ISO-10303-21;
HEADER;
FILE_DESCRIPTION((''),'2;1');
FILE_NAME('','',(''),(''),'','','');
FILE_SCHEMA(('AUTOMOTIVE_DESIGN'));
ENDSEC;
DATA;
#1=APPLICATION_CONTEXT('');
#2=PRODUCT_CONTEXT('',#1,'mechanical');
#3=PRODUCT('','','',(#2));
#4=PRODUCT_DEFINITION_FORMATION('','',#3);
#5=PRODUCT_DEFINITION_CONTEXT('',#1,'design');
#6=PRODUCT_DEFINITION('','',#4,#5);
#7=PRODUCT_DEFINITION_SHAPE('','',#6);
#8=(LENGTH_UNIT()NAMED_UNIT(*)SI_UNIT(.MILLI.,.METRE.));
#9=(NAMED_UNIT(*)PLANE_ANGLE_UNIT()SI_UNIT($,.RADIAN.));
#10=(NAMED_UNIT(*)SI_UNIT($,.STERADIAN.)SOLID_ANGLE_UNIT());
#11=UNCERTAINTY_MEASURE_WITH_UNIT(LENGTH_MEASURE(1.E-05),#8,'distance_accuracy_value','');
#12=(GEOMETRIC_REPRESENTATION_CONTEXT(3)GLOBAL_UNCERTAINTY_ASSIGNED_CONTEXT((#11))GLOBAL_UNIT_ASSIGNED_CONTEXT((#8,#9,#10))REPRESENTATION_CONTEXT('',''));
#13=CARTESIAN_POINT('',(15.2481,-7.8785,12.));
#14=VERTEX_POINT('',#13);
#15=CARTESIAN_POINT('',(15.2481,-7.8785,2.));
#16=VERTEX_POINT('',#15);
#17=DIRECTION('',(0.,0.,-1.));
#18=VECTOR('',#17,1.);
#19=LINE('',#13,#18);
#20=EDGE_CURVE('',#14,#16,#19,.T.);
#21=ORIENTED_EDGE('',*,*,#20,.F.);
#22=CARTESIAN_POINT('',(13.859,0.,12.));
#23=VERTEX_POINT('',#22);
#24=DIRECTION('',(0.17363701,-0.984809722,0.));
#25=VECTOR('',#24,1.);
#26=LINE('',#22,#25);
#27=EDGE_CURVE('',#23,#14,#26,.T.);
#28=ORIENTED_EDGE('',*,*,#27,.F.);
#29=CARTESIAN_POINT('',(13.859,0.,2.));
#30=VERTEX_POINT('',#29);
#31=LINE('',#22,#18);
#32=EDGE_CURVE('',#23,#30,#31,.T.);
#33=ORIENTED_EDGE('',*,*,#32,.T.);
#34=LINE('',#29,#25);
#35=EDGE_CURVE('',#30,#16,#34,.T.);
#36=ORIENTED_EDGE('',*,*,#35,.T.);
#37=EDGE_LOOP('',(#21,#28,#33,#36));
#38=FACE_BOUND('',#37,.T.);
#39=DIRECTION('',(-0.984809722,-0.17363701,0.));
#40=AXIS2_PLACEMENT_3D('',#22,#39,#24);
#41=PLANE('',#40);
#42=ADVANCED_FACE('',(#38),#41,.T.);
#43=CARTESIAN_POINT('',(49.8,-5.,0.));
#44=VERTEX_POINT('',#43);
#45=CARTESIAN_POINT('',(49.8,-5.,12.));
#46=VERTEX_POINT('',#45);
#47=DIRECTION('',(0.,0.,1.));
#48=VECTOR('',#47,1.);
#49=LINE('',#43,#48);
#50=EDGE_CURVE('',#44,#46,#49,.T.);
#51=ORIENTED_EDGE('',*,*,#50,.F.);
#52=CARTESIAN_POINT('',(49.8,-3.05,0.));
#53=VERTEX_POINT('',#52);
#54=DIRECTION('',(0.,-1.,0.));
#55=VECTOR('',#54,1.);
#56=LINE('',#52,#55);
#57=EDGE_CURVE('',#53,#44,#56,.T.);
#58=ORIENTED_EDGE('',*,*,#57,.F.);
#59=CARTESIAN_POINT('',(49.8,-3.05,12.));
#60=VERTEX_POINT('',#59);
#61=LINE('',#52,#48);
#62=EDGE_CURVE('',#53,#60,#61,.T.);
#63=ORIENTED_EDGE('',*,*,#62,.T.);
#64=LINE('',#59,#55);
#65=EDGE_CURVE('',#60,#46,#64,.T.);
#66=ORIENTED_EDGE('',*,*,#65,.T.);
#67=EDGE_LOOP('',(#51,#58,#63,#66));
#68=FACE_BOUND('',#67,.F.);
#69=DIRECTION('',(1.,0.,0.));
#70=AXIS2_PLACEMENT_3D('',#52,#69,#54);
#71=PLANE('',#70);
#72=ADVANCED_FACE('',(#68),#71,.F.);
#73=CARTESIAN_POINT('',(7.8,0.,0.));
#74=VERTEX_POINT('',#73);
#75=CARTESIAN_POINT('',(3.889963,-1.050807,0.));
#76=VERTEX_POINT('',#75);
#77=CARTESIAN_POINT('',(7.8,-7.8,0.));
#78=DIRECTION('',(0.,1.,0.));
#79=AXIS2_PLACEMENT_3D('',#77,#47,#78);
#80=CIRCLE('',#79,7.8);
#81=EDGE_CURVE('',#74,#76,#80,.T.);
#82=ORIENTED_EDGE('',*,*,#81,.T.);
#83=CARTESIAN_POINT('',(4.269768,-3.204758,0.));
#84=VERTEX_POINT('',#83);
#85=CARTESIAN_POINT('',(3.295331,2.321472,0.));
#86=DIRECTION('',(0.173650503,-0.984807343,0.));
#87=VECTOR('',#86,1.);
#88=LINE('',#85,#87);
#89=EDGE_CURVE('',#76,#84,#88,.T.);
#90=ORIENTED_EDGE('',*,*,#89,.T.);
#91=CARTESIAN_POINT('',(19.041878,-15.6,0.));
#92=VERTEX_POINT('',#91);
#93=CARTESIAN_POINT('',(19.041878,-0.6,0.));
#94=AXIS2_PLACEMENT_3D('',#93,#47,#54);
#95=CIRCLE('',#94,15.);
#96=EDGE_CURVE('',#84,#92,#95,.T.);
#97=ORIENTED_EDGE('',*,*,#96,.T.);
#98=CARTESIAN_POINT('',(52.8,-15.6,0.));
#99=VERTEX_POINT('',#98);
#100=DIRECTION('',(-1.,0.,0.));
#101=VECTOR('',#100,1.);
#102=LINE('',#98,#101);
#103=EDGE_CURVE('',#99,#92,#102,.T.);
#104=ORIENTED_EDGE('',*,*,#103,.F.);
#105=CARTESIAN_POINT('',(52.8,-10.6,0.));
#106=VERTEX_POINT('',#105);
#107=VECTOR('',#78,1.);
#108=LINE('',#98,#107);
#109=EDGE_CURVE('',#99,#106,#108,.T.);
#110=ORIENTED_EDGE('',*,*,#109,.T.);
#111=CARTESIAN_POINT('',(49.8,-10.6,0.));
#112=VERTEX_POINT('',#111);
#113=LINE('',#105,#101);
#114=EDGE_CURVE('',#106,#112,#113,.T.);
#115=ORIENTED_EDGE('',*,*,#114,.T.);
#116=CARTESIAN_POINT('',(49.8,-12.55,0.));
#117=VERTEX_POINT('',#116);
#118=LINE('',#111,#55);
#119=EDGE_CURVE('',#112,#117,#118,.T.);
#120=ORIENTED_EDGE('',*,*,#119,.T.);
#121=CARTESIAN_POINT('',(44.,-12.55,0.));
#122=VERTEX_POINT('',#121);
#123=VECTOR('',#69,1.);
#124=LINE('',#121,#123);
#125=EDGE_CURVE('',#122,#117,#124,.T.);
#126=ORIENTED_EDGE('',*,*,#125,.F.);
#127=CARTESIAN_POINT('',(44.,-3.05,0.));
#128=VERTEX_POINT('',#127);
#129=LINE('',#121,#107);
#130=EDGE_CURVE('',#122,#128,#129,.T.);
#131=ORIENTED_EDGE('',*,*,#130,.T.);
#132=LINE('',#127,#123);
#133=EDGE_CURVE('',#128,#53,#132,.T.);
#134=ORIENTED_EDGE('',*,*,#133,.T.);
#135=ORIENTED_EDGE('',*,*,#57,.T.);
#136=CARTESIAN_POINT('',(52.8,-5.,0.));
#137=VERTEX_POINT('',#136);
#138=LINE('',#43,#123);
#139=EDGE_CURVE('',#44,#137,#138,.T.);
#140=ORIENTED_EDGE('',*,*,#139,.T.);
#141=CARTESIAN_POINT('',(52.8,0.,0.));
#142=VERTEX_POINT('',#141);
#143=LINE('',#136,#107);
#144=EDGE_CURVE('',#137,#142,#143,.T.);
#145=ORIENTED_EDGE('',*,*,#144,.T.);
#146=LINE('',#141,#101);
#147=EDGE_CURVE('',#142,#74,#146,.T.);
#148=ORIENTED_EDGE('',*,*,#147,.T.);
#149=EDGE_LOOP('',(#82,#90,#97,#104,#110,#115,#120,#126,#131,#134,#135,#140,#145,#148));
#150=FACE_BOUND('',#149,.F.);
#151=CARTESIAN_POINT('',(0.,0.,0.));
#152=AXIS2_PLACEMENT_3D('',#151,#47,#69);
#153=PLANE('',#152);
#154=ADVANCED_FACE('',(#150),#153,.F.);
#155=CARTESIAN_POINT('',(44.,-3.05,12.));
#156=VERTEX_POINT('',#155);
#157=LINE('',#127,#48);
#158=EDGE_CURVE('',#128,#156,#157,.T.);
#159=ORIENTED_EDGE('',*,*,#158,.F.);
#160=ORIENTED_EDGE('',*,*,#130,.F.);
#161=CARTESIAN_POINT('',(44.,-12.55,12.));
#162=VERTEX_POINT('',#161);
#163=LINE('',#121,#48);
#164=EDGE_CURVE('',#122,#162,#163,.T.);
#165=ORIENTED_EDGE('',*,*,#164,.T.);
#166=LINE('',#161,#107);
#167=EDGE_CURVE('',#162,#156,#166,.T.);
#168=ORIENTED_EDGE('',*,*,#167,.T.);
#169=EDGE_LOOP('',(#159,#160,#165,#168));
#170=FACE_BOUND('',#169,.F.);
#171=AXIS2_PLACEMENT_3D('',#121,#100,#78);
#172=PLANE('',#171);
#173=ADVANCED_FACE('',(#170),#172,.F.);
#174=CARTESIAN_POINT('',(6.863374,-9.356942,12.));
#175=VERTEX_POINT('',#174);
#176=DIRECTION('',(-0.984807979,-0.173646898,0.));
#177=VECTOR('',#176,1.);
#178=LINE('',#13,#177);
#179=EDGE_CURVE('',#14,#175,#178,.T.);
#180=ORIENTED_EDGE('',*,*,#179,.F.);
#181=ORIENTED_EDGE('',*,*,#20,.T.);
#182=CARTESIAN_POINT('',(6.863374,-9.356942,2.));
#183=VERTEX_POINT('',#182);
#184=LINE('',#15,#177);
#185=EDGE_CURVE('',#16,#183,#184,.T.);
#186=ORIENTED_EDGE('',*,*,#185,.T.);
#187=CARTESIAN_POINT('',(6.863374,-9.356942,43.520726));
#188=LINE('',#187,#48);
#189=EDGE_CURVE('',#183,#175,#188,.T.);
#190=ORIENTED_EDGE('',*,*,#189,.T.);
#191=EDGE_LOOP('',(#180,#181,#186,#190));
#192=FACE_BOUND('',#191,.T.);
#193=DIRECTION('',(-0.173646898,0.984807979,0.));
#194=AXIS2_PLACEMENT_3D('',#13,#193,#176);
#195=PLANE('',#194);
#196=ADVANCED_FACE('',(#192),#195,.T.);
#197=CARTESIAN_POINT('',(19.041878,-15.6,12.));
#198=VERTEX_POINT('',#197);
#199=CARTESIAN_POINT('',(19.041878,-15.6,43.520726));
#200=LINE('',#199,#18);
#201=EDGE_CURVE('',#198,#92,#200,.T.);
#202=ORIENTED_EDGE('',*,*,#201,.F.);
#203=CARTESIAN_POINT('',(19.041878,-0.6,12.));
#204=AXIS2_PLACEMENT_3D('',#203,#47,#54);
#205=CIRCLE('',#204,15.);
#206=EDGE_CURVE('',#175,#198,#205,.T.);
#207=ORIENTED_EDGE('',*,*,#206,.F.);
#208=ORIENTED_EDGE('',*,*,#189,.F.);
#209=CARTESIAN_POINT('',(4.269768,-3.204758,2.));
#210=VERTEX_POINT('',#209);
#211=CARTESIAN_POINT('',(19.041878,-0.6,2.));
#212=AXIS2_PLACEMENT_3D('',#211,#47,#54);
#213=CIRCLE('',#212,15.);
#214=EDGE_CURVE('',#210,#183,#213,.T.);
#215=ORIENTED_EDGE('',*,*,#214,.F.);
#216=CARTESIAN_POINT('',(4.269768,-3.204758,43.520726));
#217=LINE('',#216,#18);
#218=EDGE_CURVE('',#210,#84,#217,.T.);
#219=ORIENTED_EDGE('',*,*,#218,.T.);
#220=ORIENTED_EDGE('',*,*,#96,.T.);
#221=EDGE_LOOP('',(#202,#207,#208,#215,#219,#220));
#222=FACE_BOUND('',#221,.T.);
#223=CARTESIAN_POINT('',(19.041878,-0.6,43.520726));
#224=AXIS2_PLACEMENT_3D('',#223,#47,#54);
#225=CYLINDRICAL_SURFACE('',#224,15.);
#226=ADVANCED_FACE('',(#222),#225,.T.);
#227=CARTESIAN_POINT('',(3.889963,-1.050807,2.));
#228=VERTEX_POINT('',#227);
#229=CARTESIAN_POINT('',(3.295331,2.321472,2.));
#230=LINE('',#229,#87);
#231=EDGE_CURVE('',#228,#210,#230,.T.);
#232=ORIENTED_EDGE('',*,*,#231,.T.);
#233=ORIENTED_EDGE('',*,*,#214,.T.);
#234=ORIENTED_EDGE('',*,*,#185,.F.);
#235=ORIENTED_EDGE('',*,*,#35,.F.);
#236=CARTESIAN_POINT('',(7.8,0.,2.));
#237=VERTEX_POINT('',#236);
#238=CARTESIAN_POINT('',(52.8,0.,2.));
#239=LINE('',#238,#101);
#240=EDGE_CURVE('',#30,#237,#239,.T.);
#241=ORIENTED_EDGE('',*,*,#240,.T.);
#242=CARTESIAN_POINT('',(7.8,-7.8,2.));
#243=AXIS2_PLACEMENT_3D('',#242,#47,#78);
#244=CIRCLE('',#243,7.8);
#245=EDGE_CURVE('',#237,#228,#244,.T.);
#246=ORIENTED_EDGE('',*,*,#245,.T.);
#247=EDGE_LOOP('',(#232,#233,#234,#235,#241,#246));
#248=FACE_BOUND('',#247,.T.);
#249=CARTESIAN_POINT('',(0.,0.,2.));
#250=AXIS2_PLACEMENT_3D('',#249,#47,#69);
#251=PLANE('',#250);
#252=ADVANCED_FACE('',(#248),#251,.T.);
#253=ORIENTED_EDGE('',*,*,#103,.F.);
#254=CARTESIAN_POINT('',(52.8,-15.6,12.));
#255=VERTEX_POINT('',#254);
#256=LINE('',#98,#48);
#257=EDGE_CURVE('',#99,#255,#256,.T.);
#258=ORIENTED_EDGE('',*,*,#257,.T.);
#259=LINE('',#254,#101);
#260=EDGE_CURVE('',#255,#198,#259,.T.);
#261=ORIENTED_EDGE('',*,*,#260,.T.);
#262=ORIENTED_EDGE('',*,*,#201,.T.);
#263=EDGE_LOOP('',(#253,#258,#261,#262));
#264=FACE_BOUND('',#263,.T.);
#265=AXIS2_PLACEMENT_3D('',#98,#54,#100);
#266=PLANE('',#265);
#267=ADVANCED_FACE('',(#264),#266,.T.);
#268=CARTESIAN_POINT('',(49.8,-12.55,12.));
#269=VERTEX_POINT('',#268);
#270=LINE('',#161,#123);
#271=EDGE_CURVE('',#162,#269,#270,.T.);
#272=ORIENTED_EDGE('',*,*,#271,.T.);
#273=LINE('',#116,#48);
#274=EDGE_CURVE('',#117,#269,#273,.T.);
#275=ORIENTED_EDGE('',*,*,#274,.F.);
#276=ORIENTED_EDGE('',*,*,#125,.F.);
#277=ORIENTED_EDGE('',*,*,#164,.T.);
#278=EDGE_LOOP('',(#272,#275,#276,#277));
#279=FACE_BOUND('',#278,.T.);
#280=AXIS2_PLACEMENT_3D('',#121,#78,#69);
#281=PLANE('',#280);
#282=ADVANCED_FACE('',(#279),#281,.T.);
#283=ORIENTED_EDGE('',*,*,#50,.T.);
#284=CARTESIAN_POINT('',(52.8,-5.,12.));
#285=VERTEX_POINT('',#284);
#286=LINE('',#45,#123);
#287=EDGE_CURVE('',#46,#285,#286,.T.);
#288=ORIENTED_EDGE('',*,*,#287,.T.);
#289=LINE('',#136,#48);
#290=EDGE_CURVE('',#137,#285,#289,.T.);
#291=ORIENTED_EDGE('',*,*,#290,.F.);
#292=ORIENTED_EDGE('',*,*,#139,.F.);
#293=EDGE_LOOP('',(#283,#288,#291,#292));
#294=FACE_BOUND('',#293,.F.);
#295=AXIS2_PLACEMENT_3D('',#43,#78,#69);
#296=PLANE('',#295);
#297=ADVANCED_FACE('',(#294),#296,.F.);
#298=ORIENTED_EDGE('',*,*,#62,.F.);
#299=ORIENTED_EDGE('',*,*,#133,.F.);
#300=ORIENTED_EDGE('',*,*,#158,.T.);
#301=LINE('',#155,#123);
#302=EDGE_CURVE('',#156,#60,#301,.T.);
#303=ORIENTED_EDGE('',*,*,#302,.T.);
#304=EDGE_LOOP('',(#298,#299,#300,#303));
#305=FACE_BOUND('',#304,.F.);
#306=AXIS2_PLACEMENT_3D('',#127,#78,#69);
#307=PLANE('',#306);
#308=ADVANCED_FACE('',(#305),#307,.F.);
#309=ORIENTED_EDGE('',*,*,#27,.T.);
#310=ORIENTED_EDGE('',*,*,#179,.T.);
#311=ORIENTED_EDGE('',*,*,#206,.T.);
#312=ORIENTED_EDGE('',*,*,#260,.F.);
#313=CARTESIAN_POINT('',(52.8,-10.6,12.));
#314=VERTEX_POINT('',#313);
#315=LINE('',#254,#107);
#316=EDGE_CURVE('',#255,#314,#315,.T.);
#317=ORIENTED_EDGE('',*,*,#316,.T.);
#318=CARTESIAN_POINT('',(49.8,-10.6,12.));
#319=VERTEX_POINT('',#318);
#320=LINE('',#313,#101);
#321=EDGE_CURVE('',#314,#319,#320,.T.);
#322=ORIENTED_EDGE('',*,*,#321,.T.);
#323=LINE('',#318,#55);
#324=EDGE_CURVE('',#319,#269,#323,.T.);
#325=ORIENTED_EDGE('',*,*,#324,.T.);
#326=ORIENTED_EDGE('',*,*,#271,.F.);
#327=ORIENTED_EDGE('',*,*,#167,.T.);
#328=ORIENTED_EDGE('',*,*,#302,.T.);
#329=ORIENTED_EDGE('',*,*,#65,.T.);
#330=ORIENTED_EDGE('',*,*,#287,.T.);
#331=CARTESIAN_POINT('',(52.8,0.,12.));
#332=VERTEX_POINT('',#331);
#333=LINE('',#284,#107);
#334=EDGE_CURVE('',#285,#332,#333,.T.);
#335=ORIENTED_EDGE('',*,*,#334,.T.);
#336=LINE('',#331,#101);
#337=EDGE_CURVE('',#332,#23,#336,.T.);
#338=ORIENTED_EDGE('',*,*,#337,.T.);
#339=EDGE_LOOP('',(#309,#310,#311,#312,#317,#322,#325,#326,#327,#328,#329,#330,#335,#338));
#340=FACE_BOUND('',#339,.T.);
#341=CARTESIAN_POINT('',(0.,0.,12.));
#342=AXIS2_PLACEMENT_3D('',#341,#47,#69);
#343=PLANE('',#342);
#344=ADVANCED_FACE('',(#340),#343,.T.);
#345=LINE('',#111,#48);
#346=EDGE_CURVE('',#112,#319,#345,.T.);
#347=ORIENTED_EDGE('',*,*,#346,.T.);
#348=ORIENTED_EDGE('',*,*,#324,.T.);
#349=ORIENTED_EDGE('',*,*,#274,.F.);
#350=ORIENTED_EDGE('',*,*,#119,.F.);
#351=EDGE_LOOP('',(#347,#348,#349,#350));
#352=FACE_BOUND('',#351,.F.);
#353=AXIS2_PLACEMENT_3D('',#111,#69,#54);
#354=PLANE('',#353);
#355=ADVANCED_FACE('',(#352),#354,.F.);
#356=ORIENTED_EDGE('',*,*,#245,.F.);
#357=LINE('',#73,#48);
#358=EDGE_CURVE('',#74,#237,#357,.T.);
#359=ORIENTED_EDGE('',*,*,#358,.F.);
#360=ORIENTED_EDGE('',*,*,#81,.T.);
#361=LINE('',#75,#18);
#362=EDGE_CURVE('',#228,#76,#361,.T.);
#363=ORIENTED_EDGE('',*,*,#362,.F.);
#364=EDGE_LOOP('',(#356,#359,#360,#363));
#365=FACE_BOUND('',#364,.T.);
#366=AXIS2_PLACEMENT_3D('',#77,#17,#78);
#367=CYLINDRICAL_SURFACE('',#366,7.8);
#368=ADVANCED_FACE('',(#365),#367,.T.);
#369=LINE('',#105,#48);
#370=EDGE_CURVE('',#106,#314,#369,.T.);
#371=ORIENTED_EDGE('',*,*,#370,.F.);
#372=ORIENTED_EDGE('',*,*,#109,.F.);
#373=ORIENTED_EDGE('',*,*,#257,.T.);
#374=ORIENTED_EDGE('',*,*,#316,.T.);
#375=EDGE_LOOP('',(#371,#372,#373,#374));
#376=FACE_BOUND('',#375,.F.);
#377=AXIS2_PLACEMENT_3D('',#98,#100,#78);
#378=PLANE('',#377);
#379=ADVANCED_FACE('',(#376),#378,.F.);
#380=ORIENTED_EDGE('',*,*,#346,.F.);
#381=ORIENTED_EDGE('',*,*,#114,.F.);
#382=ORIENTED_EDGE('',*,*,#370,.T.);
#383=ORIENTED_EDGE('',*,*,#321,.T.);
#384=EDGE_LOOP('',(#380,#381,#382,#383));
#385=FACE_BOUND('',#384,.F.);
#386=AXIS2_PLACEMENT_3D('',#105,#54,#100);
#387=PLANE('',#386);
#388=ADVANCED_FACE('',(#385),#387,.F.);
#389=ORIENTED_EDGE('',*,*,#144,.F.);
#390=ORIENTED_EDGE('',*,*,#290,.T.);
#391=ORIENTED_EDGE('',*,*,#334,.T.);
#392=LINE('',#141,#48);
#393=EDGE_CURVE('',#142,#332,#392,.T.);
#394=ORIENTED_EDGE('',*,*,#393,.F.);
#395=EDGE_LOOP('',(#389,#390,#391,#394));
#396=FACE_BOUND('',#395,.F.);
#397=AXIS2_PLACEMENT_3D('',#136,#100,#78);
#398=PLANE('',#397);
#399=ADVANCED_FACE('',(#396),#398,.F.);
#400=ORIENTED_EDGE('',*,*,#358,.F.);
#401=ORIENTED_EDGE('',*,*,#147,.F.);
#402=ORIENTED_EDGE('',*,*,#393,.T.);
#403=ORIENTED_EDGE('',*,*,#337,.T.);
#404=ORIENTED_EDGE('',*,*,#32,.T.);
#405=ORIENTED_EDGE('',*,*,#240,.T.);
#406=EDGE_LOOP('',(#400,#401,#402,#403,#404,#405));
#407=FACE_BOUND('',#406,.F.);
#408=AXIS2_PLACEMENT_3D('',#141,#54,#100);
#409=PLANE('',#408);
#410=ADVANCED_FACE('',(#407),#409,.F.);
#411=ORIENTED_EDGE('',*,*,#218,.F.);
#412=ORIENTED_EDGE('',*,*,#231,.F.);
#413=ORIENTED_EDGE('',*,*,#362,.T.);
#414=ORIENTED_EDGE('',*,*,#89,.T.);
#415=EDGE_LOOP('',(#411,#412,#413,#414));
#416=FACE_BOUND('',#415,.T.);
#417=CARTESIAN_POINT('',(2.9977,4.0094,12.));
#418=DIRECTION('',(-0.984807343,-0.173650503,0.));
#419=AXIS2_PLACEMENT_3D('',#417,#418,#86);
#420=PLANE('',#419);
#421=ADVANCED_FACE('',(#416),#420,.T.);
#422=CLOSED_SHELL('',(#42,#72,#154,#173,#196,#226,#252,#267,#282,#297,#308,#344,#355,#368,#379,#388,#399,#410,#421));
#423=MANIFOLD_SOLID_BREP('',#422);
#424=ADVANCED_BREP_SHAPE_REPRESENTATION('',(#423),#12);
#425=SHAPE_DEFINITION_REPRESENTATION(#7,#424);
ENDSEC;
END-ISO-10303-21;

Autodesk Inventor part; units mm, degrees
ref_plane "YZ Plane" through (0, 0, 0) normal (1, 0, 0) x (0, 1, 0)
ref_plane "XZ Plane" through (0, 0, 0) normal (0, 1, 0) x (-1, 0, 0)
ref_plane "XY Plane" through (0, 0, 0) normal (0, 0, 1) x (1, 0, 0)
sketch "Sketch5" plane through (0, 0, 0) normal (0, 0, 1) x (1, 0, 0)
  line L0 (52.8, -15.6) -> (52.8, -10.6)
  line L1 (52.8, -10.6) -> (49.8, -10.6)
  line L2 (49.8, -10.6) -> (49.8, -12.55)
  line L3 (44, -12.55) -> (44, -3.05)
  line L4 (49.8, -3.05) -> (49.8, -5)
  line L5 (49.8, -5) -> (52.8, -5)
  line L6 (52.8, -5) -> (52.8, 0)
  line L7 (52.8, 0) -> (7.8, 0)
  line L8 (44, -3.05) -> (49.8, -3.05)
  line L9 (44, -12.55) -> (49.8, -12.55)
  line L10 (52.8, -15.6) -> (7.8, -15.6)
  arc A0 (7.8, 0) -> (7.8, -15.6) centre (7.8, -7.8) ccw
  point P0 (0, 0)
  dimension "d41" = 5.8
  dimension "d48" = 44
  dimension "d50" = 3
  dimension "d63" = 45
  dimension "d67" = 15.6
  dimension "d71" = 0
  dimension "d72" = 36.2
  dimension "d87" = 5.6
  dimension "d88" = 9.5
extrude "Extrusion2" add sketch "Sketch5" along normal blind 12
sketch "Sketch11" plane through (0, 0, 12) normal (0, 0, 1) x (1, 0, 0)
  line L0 (52.8, 0) -> (7.8, 0) projected
  line L1 (13.859, 0) -> (15.2481, -7.8785)
  line L2 (15.2481, -7.8785) -> (0.476, -10.4832)
  arc A0 (7.8, 0) -> (7.8, -15.6) centre (7.8, -7.8) ccw projected
  point P0 (0, 0)
  dimension "d95" = 100
  dimension "d96" = 8
  dimension "d97" = 15
extrude "Extrusion7" cut sketch "Sketch11" against normal blind 10 from surface at 0
sketch "Sketch14" plane through (0, 0, 12) normal (0, 0, 1) x (1, 0, 0)
  line L0 (2.9977, 4.0094) -> (7.2885, -20.3246)
  line L1 (7.2885, -20.3246) -> (-9.0754, -23.21)
  line L2 (-9.0754, -23.21) -> (-13.3661, 1.124)
  line L3 (-13.3661, 1.124) -> (2.9977, 4.0094)
  line L4 (13.859, 0) -> (15.2481, -7.8785) projected
  point P0 (0, 0)
  dimension "d107" = 10
extrude "Extrusion10" cut sketch "Sketch14" against normal through all
fillet "Fillet2" radius 15 1 edges at (6.4341, -15.4795, 6)
equation "\"l1\" = 8"
properties part number "Finray_test_8_Kerbe_10deg_V4_links"
